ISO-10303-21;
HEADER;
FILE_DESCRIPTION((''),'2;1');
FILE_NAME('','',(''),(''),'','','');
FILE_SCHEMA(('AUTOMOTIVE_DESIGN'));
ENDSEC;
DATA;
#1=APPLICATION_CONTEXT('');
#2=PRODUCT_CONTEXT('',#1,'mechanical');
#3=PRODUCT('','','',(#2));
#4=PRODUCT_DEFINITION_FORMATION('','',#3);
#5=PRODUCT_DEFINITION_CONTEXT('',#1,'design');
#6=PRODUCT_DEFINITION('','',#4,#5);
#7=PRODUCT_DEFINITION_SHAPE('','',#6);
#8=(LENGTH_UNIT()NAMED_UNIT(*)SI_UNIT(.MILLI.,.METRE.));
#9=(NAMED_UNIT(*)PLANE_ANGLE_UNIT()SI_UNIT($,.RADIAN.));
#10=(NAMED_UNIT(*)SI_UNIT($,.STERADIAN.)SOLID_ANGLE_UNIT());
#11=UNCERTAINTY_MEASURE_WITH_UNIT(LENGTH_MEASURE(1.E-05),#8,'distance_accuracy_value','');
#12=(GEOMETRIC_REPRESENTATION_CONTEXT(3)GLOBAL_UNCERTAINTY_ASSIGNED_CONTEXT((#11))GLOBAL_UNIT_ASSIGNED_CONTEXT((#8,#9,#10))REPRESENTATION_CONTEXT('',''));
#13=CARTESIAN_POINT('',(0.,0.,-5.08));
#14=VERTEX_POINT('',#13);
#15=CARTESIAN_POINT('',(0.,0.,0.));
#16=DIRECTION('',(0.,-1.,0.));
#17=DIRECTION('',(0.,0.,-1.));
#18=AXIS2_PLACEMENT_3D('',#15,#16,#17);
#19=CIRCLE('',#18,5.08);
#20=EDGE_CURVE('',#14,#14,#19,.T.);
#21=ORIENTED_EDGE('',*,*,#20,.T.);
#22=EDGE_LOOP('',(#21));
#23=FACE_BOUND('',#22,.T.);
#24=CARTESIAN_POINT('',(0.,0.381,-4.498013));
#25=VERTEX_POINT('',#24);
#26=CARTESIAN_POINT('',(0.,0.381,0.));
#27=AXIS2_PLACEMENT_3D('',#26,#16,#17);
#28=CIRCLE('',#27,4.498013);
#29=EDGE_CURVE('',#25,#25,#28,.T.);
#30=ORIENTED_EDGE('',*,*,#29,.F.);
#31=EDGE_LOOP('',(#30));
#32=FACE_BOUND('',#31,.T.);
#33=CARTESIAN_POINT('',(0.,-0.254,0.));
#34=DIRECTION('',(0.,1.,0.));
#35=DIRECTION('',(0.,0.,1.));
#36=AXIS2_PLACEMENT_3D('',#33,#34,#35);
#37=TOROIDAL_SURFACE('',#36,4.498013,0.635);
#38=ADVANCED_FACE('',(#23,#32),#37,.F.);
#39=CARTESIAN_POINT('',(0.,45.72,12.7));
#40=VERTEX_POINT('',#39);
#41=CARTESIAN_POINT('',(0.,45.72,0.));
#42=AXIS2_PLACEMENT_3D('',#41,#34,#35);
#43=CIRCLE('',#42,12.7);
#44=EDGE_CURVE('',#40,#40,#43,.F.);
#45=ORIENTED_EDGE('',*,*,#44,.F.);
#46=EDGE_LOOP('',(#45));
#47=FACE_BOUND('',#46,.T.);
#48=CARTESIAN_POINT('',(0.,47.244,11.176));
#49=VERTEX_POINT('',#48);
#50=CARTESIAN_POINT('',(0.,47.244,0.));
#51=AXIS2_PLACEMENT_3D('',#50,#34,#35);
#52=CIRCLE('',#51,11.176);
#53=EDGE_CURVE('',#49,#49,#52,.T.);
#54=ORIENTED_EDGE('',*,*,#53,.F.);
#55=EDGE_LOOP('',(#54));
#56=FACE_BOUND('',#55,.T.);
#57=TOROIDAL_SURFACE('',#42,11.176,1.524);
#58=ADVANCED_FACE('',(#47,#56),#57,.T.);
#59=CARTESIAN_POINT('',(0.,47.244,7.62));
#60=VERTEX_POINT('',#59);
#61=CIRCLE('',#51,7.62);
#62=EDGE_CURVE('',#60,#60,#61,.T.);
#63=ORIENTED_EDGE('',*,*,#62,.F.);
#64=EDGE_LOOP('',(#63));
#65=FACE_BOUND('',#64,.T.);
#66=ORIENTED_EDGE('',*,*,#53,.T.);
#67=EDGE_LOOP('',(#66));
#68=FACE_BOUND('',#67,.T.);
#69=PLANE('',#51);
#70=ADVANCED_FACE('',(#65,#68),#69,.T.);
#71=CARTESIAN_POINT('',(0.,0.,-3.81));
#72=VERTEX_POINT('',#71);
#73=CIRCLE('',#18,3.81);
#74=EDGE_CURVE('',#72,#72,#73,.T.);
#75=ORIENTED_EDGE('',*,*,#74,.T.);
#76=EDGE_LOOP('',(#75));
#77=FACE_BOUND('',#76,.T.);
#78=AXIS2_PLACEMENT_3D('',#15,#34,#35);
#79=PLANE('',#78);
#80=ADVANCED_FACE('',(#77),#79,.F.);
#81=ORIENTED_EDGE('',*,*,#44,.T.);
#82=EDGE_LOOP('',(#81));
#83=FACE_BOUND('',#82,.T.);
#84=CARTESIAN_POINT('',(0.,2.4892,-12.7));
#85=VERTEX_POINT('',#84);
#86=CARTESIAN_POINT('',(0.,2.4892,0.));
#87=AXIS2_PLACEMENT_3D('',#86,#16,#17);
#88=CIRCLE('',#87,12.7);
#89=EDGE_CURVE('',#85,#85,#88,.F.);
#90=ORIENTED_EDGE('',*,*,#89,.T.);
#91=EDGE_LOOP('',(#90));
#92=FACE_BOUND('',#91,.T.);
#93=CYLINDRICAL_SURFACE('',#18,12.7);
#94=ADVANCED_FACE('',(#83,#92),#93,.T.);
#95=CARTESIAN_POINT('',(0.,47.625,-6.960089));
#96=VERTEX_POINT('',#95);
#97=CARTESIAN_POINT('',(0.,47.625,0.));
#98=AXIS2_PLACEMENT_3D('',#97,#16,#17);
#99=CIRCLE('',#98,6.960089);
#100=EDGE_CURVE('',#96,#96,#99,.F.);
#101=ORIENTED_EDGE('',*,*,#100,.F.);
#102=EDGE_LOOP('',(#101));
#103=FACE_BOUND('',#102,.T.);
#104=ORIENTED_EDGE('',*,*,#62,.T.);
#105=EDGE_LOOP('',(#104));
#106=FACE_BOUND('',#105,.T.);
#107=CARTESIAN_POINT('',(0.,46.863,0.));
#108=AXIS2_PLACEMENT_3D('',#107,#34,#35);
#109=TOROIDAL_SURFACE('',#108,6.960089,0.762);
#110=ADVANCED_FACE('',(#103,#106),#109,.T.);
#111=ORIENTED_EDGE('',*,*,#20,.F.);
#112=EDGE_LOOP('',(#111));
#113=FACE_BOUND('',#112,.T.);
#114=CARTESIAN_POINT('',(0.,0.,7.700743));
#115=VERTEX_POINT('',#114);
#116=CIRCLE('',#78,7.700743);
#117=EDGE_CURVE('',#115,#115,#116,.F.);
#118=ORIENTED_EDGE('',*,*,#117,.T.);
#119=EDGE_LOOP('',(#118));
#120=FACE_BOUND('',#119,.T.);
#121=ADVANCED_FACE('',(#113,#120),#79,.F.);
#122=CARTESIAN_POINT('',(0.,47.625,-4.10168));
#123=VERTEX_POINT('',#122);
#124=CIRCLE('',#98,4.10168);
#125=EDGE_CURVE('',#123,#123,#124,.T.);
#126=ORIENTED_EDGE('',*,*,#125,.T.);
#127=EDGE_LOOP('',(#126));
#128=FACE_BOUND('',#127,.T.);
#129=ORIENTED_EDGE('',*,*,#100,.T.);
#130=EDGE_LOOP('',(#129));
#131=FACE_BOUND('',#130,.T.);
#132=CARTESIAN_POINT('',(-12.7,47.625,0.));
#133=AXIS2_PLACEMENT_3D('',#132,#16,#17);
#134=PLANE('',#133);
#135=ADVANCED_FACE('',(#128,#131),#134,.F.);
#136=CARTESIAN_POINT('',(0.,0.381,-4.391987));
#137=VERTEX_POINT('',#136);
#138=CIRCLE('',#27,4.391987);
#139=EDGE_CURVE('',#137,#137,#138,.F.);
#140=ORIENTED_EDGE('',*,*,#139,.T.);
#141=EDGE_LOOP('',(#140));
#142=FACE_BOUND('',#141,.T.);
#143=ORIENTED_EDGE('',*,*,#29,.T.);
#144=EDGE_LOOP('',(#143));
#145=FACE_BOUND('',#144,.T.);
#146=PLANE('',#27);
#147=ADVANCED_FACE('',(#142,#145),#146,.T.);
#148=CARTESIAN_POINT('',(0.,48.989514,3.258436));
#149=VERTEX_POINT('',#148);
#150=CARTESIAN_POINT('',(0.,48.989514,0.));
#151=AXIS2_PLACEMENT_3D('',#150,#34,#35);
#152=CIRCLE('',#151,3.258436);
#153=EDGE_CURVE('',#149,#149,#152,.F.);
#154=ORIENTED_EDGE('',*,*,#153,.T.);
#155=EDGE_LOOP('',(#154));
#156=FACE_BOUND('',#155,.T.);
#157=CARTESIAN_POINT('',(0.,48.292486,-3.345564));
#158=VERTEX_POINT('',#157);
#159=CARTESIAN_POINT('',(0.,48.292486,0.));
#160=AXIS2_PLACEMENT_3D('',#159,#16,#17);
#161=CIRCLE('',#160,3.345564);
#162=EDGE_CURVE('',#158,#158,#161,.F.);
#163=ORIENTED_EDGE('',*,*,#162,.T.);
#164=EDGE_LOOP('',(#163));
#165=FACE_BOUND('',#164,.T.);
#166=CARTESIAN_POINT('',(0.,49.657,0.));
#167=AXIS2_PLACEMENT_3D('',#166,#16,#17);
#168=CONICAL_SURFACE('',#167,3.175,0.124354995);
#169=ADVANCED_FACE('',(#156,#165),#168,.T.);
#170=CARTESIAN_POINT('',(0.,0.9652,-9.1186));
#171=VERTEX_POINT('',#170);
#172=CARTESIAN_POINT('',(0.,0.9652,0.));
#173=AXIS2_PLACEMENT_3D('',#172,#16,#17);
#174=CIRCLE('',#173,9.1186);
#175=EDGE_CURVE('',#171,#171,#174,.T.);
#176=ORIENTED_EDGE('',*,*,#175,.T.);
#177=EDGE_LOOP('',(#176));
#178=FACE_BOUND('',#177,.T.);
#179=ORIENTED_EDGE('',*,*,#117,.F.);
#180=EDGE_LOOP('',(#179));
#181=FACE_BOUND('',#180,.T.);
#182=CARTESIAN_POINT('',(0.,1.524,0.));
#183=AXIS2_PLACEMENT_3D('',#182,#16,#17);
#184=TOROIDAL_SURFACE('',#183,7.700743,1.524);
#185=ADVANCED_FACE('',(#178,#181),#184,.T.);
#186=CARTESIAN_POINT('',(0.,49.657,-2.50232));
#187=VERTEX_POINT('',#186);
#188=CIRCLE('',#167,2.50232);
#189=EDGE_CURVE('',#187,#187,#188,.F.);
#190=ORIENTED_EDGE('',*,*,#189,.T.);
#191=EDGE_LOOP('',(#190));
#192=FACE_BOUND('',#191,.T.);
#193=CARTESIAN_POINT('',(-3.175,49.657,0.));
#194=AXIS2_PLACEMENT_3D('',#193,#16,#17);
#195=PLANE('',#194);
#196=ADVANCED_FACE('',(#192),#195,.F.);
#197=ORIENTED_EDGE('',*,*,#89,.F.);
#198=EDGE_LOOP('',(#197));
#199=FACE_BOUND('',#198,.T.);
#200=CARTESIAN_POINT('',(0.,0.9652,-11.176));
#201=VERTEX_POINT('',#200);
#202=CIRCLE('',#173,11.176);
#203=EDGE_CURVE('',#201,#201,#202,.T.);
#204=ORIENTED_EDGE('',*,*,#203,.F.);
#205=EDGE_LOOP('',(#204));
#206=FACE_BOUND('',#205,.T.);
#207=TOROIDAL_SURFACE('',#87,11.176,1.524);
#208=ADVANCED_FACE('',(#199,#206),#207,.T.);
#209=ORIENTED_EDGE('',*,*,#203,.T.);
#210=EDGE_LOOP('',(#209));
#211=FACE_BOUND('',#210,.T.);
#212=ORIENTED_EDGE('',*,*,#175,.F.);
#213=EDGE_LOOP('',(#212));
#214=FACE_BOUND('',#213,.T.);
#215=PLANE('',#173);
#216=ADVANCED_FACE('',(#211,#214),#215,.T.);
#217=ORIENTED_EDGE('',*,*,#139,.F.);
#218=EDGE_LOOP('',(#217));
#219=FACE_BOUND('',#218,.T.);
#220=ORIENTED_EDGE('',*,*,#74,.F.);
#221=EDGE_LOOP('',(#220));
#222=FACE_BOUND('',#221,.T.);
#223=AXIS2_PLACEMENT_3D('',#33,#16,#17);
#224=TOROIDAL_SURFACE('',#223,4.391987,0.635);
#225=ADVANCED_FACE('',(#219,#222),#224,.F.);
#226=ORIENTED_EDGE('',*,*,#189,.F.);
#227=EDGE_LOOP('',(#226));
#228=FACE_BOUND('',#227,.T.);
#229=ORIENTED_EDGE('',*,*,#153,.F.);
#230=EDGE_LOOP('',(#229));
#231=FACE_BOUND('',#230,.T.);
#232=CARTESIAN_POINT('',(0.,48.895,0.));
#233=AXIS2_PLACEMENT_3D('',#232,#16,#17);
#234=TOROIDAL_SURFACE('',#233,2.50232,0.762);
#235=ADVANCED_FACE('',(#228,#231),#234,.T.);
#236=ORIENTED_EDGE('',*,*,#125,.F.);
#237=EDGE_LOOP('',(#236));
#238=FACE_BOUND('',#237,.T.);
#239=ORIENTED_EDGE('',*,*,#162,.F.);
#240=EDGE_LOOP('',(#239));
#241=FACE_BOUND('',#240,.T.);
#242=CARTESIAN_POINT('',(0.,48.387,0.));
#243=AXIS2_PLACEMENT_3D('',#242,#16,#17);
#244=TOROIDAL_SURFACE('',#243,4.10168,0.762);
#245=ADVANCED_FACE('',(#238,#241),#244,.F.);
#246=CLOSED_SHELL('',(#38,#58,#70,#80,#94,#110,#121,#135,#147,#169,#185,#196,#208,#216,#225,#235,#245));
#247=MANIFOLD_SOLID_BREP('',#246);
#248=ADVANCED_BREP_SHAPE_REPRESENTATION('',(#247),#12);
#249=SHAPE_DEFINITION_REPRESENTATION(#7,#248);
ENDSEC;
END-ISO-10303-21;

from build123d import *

# Parameters (mm, degrees)
SKETCH2_R      = 12.7
SKETCH2_R_2    = 7.62
EXTRUDE1_DEPTH = 0.381
EXTRUDE2_START = -0.9652
SKETCH3_R      = 12.7
SKETCH3_R_2    = 9.1186
EXTRUDE2_DEPTH = 0.9652
SKETCH4_R      = 5.08
SKETCH4_R_2    = 3.81
EXTRUDE3_DEPTH = 0.381
FILLET1_R      = 1.524
FILLET2_R      = 0.762
FILLET3_R      = 0.635


with BuildPart() as part:
    # Sketch1 → Revolve1 (revolve)
    with BuildSketch(Plane.XY, mode=Mode.PRIVATE) as revolve1_sk:
        Polygon((0, 0), (-12.7, 0), (-12.7, 47.625), (-3.429, 47.625), (-3.175, 49.657), (0, 49.657), align=None)
    revolve(revolve1_sk.sketch.rotate(Axis((0, 0, 0), (0, 1, 0)), 270), axis=Axis((0, 0, 0), (0, 1, 0)))

    # Sketch2 → Extrude1 (cut)
    with BuildSketch(Plane(origin=(0, 47.625, 0), x_dir=(1, 0, 0), z_dir=(0, 1, 0))):
        with Locations(Location((0, 0, 0), (0, 0, 90))):
            Circle(SKETCH2_R)
        with Locations(Location((0, 0, 0), (0, 0, 270))):
            Circle(SKETCH2_R_2, mode=Mode.SUBTRACT)
    extrude(amount=-EXTRUDE1_DEPTH, mode=Mode.SUBTRACT)

    # Sketch3 → Extrude2 (cut)
    with BuildSketch(Plane.XZ.offset(EXTRUDE2_START)):
        with Locations(Location((0, 0, 0), (0, 0, 270))):
            Circle(SKETCH3_R)
        with Locations(Location((0, 0, 0), (0, 0, 270))):
            Circle(SKETCH3_R_2, mode=Mode.SUBTRACT)
    extrude(amount=EXTRUDE2_DEPTH, mode=Mode.SUBTRACT)

    # Sketch4 → Extrude3 (cut)
    with BuildSketch(Plane.XZ):
        with Locations(Location((0, 0, 0), (0, 0, 270))):
            Circle(SKETCH4_R)
        with Locations(Location((0, 0, 0), (0, 0, 270))):
            Circle(SKETCH4_R_2, mode=Mode.SUBTRACT)
    extrude(amount=-EXTRUDE3_DEPTH, mode=Mode.SUBTRACT)

    # Fillet1
    # the kernel refuses this fillet: 1.524 mm, written as the material it takes off along each edge
    with BuildSketch(Plane(origin=(0, 47.244, 0), x_dir=(0, 0, -1), z_dir=(1, 0, 0))) as fillet1_piece_1:
        with BuildLine():
            CenterArc((12.7 - FILLET1_R, -FILLET1_R), FILLET1_R, 0, 90)
            Line((12.7 - FILLET1_R, 0), (12.7 - FILLET1_R, FILLET1_R * 0.02))
            Line((12.7 - FILLET1_R, FILLET1_R * 0.02), (12.7 + FILLET1_R * 0.02, FILLET1_R * 0.02))
            Line((12.7 + FILLET1_R * 0.02, FILLET1_R * 0.02), (12.7 + FILLET1_R * 0.02, -FILLET1_R))
            Line((12.7 + FILLET1_R * 0.02, -FILLET1_R), (12.7, -FILLET1_R))
        make_face()
    revolve(axis=Axis((0, 47.244, 0), (0, 1, 0)), mode=Mode.SUBTRACT)
    with BuildSketch(Plane(origin=(0, 0.9652, 0), x_dir=(0, 0, -1), z_dir=(-1, 0, 0))) as fillet1_piece_2:
        with BuildLine():
            CenterArc((12.7 - FILLET1_R, -FILLET1_R), FILLET1_R, 0, 90)
            Line((12.7, -FILLET1_R), (12.7 + FILLET1_R * 0.02, -FILLET1_R))
            Line((12.7 + FILLET1_R * 0.02, -FILLET1_R), (12.7 + FILLET1_R * 0.02, FILLET1_R * 0.02))
            Line((12.7 + FILLET1_R * 0.02, FILLET1_R * 0.02), (12.7 - FILLET1_R, FILLET1_R * 0.02))
            Line((12.7 - FILLET1_R, FILLET1_R * 0.02), (12.7 - FILLET1_R, 0))
        make_face()
    revolve(axis=Axis((0, 0.9652, 0), (0, -1, 0)), mode=Mode.SUBTRACT)
    with BuildSketch(Plane(origin=(0, 0, 0), x_dir=(0, 0, -1), z_dir=(-1, 0, 0))) as fillet1_piece_3:
        with BuildLine():
            CenterArc((7.700742969, -1.524), FILLET1_R, 21.510188267, 68.489811733)
            Line((9.1186, -0.9652), (9.146957141, -0.954024))
            ThreePointArc((9.146957141, -0.954024), (9.14908, -0.4826), (9.14908, 0))
            Line((9.14908, 0), (9.1186, 0.03048))
            Line((9.1186, 0.03048), (7.700742969, 0.03048))
            Line((7.700742969, 0.03048), (7.700742969, 0))
        make_face()
    revolve(axis=Axis((0, 0, 0), (0, -1, 0)), mode=Mode.SUBTRACT)

    # Fillet2
    # the kernel refuses this fillet: 0.762 mm, written as the material it adds along each edge
    with BuildSketch(Plane(origin=(0, 47.625, 0), x_dir=(0, 0, -1), z_dir=(1, 0, 0))) as fillet2_piece_1:
        with BuildLine():
            CenterArc((3.429 + FILLET2_R * 0.882782218537, FILLET2_R), FILLET2_R, 187.125016349, 82.874983651)
            Line((3.429 - FILLET2_R * 0.109495658176, FILLET2_R * 0.875965265411), (3.429, 0))
            Line((3.429, 0), (3.429 + FILLET2_R * 0.882782218537, 0))
        make_face()
    revolve(axis=Axis((0, 47.625, 0), (0, 1, 0)))
    # the kernel refuses this fillet: 0.762 mm, written as the material it takes off along each edge
    with BuildSketch(Plane(origin=(0, 47.625, 0), x_dir=(0, 0, 1), z_dir=(-1, 0, 0))) as fillet2_2_piece_1:
        with BuildLine():
            CenterArc((6.960088642, -0.762), FILLET2_R, 30, 60)
            Line((6.960088642, 0), (7.62, 0))
            Line((7.62, 0), (7.62, -0.381))
        make_face()
    revolve(axis=Axis((0, 47.625, 0), (0, 1, 0)), mode=Mode.SUBTRACT)
    with BuildSketch(Plane(origin=(0, 49.657, 0), x_dir=(0, 0, -1), z_dir=(1, 0, 0))) as fillet2_2_piece_2:
        with BuildLine():
            CenterArc((3.175 - FILLET2_R * 0.882782218537, -FILLET2_R), FILLET2_R, 7.125016349, 82.874983651)
            Line((3.175 - FILLET2_R * 0.882782218537, 0), (3.175, 0))
            Line((3.175, 0), (3.175 + FILLET2_R * 0.109495658176, -FILLET2_R * 0.875965265411))
        make_face()
    revolve(axis=Axis((0, 49.657, 0), (0, 1, 0)), mode=Mode.SUBTRACT)

    # Fillet3
    # the kernel refuses this fillet: 0.635 mm, written as the material it adds along each edge
    with BuildSketch(Plane(origin=(0, 0.381, 0), x_dir=(0, 0, -1), z_dir=(-1, 0, 0))) as fillet3_piece_1:
        with BuildLine():
            CenterArc((4.498012887, 0.635), FILLET3_R, 270, 66.421821522)
            Line((4.498012887, 0), (4.498012887, -0.0127))
            Line((4.498012887, -0.0127), (5.08, -0.0127))
            Line((5.08, -0.0127), (5.0927, 0))
            ThreePointArc((5.0927, 0), (5.0927, 0.1905), (5.091639742, 0.37592))
            Line((5.091639742, 0.37592), (5.08, 0.381))
        make_face()
    revolve(axis=Axis((0, 0.381, 0), (0, -1, 0)))
    with BuildSketch(Plane(origin=(0, 0.381, 0), x_dir=(0, 0, -1), z_dir=(-1, 0, 0))) as fillet3_piece_2:
        with BuildLine():
            CenterArc((4.391987113, 0.635), FILLET3_R, 203.578178478, 66.421821522)
            Line((3.81, 0.381), (3.798360258, 0.37592))
            ThreePointArc((3.798360258, 0.37592), (3.7973, 0.1905), (3.7973, 0))
            Line((3.7973, 0), (3.81, -0.0127))
            Line((3.81, -0.0127), (4.391987113, -0.0127))
            Line((4.391987113, -0.0127), (4.391987113, 0))
        make_face()
    revolve(axis=Axis((0, 0.381, 0), (0, -1, 0)))


solid = part.part
